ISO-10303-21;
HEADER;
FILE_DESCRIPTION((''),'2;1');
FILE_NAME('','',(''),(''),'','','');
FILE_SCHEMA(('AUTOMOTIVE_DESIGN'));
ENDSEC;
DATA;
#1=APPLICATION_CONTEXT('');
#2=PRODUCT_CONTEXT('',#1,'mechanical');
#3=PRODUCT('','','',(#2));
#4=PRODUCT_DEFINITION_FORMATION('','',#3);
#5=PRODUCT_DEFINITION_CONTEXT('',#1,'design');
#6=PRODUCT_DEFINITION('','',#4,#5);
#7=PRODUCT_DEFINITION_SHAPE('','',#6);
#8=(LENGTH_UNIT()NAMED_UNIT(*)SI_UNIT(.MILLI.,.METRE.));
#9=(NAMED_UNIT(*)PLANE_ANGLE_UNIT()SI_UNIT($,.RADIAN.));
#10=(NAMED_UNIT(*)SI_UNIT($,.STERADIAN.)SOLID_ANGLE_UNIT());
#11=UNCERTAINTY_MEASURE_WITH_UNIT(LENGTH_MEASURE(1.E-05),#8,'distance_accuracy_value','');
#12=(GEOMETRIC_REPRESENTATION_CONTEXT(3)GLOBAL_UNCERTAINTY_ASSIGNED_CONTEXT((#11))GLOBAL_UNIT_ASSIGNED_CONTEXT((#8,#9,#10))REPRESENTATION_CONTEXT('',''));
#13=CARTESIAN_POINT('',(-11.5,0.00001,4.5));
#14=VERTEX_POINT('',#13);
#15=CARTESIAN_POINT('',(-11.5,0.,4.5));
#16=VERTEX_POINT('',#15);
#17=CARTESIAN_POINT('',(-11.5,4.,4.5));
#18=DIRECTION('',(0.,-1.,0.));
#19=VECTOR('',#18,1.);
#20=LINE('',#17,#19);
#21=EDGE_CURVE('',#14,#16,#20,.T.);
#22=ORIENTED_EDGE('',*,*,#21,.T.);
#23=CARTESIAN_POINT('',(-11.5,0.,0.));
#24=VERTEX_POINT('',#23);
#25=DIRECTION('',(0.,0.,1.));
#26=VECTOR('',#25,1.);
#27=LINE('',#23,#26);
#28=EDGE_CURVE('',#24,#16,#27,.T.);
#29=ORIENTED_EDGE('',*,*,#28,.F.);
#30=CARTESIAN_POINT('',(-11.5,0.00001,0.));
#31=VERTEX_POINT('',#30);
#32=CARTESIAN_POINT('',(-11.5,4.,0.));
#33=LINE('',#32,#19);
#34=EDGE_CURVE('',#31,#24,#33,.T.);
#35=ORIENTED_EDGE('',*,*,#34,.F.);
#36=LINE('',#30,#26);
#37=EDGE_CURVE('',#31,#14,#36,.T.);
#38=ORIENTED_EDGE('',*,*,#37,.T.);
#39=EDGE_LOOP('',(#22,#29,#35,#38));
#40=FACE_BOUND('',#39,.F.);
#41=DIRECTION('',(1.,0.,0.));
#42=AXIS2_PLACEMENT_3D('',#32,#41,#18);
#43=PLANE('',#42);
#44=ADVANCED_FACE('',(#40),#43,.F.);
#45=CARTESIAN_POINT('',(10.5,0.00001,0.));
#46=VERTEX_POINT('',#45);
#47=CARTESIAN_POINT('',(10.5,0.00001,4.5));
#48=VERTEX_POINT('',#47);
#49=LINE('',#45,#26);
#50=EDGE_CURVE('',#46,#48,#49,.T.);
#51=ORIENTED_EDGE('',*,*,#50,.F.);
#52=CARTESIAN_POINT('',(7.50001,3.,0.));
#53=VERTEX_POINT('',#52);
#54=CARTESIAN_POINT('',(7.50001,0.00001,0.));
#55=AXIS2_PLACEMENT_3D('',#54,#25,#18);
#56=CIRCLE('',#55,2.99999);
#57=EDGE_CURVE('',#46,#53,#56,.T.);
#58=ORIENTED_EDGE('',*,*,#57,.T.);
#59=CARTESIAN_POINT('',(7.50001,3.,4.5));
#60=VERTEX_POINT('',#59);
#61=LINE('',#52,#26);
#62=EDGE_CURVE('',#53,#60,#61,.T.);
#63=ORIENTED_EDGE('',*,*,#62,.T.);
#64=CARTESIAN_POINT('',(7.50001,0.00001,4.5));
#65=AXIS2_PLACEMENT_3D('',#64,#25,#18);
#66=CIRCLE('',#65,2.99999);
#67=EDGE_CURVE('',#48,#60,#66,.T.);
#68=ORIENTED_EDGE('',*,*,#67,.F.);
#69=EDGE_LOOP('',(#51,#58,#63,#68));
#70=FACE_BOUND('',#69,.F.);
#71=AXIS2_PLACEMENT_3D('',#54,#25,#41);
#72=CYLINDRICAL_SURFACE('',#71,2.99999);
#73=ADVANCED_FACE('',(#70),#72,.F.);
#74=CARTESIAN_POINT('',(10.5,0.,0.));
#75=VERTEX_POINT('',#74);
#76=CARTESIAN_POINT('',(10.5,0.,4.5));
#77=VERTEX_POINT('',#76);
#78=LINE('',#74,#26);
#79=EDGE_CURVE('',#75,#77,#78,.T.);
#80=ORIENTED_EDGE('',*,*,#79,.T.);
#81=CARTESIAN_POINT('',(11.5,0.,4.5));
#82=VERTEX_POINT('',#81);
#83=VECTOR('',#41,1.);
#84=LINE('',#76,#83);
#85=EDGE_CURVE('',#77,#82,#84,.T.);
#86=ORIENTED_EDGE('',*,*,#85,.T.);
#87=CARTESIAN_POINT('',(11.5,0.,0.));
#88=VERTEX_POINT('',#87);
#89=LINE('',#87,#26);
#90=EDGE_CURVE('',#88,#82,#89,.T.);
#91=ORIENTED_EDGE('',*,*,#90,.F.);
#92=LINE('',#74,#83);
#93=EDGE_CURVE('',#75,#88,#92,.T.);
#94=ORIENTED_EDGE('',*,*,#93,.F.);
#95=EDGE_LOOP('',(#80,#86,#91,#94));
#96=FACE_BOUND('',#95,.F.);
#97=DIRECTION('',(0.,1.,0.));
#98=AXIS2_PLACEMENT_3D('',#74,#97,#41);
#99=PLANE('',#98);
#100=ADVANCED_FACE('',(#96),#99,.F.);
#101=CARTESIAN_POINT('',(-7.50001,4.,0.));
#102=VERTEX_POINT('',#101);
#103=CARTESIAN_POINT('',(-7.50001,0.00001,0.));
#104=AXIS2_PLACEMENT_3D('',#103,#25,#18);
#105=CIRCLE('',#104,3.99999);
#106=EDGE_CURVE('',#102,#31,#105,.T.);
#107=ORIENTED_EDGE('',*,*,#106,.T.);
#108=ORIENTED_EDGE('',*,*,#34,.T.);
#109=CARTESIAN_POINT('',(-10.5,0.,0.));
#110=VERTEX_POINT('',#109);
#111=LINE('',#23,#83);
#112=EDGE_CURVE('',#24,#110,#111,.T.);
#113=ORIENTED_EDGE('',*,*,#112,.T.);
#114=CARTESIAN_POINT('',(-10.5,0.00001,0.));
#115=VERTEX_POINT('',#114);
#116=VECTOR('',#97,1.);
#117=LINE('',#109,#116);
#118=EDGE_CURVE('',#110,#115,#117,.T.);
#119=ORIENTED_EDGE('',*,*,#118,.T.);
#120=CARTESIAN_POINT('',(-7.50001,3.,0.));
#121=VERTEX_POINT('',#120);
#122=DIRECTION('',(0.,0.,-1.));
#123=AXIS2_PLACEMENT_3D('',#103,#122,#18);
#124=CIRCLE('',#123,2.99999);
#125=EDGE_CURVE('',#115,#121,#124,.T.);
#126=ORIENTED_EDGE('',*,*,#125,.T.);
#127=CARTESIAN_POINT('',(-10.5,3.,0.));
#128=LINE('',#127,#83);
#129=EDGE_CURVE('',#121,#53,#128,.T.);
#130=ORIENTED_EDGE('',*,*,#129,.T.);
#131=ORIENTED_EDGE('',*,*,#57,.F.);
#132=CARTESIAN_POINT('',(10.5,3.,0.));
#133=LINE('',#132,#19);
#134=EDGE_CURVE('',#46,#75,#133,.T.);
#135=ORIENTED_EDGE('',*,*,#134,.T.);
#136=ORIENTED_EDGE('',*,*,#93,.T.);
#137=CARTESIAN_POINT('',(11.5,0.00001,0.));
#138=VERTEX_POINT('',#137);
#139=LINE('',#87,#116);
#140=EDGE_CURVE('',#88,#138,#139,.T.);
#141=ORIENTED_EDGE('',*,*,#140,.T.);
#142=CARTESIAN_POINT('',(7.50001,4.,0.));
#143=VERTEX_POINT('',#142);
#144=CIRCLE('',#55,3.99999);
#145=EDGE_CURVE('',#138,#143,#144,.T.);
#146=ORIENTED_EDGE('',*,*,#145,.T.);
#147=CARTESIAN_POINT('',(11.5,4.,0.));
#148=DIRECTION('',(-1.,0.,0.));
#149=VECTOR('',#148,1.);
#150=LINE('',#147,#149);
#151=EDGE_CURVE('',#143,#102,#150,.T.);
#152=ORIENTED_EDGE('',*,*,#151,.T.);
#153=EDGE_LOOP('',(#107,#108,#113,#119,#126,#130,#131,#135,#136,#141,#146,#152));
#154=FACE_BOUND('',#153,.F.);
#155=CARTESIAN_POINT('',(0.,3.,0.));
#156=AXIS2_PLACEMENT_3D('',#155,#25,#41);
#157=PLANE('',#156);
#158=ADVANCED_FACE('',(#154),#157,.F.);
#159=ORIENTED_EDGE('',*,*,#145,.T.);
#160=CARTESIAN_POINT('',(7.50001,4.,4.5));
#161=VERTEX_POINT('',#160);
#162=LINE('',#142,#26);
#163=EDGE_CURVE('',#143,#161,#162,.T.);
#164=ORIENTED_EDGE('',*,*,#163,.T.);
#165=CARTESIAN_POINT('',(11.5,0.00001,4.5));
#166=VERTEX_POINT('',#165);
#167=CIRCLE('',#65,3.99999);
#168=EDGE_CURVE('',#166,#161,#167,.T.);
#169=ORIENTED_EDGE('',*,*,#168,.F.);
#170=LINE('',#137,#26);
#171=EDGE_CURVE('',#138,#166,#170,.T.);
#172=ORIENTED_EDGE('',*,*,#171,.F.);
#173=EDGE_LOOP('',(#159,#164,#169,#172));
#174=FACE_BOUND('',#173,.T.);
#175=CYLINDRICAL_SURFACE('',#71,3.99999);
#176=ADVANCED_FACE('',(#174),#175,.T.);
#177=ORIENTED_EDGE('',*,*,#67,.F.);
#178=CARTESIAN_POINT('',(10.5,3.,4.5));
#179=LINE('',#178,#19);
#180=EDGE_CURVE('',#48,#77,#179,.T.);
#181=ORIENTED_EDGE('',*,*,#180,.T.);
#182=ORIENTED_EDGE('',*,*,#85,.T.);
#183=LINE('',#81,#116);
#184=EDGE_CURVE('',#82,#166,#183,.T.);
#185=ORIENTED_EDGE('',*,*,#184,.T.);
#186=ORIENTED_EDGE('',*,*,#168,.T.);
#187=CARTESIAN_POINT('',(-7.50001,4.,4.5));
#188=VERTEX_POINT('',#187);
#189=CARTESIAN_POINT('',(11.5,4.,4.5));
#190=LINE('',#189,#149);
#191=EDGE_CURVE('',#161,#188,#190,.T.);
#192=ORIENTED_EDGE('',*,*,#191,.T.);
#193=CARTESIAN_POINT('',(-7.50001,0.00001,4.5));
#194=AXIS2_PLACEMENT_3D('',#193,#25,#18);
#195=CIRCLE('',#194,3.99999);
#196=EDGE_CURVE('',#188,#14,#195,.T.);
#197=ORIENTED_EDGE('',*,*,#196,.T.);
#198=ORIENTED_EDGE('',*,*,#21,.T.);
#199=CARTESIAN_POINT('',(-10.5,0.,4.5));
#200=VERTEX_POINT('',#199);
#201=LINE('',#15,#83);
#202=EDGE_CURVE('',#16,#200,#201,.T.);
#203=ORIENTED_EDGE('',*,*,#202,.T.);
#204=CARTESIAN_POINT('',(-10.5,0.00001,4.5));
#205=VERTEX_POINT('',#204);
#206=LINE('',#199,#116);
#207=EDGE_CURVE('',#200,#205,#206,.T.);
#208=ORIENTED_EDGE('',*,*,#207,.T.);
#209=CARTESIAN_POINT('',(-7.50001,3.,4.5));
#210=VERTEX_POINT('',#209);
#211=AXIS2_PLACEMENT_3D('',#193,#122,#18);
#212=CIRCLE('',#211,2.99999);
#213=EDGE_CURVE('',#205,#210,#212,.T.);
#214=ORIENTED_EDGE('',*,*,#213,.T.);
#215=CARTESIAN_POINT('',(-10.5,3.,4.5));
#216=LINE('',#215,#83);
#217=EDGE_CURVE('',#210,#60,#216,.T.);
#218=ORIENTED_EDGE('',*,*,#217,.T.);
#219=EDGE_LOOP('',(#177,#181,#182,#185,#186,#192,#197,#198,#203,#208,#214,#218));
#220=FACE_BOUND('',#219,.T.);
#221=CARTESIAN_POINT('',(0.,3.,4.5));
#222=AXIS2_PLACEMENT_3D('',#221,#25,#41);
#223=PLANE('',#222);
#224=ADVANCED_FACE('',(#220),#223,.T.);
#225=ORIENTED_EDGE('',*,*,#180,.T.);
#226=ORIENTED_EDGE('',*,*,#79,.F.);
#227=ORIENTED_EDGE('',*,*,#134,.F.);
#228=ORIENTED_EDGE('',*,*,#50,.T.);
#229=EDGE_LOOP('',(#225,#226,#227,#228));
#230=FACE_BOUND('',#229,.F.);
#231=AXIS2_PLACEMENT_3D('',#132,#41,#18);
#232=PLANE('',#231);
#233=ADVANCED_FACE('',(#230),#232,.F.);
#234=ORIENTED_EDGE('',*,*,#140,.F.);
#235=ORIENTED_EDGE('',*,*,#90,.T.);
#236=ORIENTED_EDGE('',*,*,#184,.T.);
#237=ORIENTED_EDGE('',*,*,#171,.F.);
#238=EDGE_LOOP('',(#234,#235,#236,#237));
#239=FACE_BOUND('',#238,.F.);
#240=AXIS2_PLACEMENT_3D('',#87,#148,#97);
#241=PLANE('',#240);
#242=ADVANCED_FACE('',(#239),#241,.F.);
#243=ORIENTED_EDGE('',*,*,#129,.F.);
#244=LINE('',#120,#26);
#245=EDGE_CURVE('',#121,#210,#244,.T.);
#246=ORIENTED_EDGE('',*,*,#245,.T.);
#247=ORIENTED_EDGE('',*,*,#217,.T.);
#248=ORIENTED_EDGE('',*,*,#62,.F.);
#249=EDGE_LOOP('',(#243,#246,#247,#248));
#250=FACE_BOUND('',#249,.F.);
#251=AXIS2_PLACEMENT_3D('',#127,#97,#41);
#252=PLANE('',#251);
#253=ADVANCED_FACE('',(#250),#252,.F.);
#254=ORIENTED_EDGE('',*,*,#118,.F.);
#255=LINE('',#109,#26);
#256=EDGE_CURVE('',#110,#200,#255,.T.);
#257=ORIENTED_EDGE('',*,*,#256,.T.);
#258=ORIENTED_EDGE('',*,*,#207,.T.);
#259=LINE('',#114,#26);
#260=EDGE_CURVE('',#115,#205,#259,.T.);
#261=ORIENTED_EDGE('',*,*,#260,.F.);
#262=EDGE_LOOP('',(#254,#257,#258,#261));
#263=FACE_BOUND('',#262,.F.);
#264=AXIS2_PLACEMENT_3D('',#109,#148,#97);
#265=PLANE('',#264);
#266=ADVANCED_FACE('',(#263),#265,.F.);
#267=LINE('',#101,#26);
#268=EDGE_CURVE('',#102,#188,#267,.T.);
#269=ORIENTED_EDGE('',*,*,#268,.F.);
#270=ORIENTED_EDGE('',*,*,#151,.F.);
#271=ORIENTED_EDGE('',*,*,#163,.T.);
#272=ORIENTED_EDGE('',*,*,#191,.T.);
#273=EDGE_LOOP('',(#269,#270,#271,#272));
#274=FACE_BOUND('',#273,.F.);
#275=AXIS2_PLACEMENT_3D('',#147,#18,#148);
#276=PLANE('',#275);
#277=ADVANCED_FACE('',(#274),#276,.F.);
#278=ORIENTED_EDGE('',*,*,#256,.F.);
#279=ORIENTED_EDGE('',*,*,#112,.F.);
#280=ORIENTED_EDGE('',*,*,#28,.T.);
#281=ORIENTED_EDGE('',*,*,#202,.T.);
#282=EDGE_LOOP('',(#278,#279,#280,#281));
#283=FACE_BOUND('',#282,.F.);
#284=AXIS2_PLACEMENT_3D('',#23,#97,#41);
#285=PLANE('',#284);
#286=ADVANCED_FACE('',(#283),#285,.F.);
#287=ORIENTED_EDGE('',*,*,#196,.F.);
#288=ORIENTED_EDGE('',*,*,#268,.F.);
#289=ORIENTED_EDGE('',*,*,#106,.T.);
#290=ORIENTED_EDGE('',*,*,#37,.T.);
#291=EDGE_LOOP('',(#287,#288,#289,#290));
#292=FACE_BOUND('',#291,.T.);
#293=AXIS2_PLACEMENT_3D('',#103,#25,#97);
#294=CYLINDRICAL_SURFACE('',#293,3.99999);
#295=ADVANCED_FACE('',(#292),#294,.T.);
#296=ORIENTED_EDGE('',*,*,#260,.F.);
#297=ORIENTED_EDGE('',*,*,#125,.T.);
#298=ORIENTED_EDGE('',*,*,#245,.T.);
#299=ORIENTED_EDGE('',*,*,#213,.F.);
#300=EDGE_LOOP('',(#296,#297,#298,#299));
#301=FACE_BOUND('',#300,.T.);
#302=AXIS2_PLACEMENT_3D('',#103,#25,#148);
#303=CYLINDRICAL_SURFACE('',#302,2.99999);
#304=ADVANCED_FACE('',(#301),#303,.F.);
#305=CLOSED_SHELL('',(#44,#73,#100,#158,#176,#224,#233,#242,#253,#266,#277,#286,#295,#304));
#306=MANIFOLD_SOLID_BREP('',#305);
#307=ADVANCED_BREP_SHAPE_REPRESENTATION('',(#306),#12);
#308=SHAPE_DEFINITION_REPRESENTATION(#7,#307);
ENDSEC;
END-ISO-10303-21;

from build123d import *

# Parameters (mm, degrees)
F1_DEPTH = 4.5
F2_R     = 2.99999
F3_R     = 3.99999


# Not quite as in the source:
# - a fillet or chamfer is up to 0.001 mm smaller than in the source, because OpenCascade refuses the exact size


with BuildPart() as f1:
    # F0 (on Top) → F1 (new body)
    with BuildSketch(Plane.XY):
        Polygon((10.5, 3), (10.5, 0), (11.5, 0), (11.5, 4), (-11.5, 4), (-11.5, 0), (-10.5, 0), (-10.5, 3), align=None)
    extrude(amount=F1_DEPTH)

    # F2 (radius 3 in the source; OpenCascade refuses exactly that, so slightly less here)
    f2_edges = [f1.edges().sort_by_distance(p)[0] for p in [
        (10.5, 3, 2.25),
        (-10.5, 3, 2.25),
    ]]
    fillet(f2_edges, radius=F2_R)

    # F3 (radius 4 in the source; OpenCascade refuses exactly that, so slightly less here)
    f3_edges = [f1.edges().sort_by_distance(p)[0] for p in [
        (-11.5, 4, 2.25),
        (11.5, 4, 2.25),
    ]]
    fillet(f3_edges, radius=F3_R)


solid = f1.part
